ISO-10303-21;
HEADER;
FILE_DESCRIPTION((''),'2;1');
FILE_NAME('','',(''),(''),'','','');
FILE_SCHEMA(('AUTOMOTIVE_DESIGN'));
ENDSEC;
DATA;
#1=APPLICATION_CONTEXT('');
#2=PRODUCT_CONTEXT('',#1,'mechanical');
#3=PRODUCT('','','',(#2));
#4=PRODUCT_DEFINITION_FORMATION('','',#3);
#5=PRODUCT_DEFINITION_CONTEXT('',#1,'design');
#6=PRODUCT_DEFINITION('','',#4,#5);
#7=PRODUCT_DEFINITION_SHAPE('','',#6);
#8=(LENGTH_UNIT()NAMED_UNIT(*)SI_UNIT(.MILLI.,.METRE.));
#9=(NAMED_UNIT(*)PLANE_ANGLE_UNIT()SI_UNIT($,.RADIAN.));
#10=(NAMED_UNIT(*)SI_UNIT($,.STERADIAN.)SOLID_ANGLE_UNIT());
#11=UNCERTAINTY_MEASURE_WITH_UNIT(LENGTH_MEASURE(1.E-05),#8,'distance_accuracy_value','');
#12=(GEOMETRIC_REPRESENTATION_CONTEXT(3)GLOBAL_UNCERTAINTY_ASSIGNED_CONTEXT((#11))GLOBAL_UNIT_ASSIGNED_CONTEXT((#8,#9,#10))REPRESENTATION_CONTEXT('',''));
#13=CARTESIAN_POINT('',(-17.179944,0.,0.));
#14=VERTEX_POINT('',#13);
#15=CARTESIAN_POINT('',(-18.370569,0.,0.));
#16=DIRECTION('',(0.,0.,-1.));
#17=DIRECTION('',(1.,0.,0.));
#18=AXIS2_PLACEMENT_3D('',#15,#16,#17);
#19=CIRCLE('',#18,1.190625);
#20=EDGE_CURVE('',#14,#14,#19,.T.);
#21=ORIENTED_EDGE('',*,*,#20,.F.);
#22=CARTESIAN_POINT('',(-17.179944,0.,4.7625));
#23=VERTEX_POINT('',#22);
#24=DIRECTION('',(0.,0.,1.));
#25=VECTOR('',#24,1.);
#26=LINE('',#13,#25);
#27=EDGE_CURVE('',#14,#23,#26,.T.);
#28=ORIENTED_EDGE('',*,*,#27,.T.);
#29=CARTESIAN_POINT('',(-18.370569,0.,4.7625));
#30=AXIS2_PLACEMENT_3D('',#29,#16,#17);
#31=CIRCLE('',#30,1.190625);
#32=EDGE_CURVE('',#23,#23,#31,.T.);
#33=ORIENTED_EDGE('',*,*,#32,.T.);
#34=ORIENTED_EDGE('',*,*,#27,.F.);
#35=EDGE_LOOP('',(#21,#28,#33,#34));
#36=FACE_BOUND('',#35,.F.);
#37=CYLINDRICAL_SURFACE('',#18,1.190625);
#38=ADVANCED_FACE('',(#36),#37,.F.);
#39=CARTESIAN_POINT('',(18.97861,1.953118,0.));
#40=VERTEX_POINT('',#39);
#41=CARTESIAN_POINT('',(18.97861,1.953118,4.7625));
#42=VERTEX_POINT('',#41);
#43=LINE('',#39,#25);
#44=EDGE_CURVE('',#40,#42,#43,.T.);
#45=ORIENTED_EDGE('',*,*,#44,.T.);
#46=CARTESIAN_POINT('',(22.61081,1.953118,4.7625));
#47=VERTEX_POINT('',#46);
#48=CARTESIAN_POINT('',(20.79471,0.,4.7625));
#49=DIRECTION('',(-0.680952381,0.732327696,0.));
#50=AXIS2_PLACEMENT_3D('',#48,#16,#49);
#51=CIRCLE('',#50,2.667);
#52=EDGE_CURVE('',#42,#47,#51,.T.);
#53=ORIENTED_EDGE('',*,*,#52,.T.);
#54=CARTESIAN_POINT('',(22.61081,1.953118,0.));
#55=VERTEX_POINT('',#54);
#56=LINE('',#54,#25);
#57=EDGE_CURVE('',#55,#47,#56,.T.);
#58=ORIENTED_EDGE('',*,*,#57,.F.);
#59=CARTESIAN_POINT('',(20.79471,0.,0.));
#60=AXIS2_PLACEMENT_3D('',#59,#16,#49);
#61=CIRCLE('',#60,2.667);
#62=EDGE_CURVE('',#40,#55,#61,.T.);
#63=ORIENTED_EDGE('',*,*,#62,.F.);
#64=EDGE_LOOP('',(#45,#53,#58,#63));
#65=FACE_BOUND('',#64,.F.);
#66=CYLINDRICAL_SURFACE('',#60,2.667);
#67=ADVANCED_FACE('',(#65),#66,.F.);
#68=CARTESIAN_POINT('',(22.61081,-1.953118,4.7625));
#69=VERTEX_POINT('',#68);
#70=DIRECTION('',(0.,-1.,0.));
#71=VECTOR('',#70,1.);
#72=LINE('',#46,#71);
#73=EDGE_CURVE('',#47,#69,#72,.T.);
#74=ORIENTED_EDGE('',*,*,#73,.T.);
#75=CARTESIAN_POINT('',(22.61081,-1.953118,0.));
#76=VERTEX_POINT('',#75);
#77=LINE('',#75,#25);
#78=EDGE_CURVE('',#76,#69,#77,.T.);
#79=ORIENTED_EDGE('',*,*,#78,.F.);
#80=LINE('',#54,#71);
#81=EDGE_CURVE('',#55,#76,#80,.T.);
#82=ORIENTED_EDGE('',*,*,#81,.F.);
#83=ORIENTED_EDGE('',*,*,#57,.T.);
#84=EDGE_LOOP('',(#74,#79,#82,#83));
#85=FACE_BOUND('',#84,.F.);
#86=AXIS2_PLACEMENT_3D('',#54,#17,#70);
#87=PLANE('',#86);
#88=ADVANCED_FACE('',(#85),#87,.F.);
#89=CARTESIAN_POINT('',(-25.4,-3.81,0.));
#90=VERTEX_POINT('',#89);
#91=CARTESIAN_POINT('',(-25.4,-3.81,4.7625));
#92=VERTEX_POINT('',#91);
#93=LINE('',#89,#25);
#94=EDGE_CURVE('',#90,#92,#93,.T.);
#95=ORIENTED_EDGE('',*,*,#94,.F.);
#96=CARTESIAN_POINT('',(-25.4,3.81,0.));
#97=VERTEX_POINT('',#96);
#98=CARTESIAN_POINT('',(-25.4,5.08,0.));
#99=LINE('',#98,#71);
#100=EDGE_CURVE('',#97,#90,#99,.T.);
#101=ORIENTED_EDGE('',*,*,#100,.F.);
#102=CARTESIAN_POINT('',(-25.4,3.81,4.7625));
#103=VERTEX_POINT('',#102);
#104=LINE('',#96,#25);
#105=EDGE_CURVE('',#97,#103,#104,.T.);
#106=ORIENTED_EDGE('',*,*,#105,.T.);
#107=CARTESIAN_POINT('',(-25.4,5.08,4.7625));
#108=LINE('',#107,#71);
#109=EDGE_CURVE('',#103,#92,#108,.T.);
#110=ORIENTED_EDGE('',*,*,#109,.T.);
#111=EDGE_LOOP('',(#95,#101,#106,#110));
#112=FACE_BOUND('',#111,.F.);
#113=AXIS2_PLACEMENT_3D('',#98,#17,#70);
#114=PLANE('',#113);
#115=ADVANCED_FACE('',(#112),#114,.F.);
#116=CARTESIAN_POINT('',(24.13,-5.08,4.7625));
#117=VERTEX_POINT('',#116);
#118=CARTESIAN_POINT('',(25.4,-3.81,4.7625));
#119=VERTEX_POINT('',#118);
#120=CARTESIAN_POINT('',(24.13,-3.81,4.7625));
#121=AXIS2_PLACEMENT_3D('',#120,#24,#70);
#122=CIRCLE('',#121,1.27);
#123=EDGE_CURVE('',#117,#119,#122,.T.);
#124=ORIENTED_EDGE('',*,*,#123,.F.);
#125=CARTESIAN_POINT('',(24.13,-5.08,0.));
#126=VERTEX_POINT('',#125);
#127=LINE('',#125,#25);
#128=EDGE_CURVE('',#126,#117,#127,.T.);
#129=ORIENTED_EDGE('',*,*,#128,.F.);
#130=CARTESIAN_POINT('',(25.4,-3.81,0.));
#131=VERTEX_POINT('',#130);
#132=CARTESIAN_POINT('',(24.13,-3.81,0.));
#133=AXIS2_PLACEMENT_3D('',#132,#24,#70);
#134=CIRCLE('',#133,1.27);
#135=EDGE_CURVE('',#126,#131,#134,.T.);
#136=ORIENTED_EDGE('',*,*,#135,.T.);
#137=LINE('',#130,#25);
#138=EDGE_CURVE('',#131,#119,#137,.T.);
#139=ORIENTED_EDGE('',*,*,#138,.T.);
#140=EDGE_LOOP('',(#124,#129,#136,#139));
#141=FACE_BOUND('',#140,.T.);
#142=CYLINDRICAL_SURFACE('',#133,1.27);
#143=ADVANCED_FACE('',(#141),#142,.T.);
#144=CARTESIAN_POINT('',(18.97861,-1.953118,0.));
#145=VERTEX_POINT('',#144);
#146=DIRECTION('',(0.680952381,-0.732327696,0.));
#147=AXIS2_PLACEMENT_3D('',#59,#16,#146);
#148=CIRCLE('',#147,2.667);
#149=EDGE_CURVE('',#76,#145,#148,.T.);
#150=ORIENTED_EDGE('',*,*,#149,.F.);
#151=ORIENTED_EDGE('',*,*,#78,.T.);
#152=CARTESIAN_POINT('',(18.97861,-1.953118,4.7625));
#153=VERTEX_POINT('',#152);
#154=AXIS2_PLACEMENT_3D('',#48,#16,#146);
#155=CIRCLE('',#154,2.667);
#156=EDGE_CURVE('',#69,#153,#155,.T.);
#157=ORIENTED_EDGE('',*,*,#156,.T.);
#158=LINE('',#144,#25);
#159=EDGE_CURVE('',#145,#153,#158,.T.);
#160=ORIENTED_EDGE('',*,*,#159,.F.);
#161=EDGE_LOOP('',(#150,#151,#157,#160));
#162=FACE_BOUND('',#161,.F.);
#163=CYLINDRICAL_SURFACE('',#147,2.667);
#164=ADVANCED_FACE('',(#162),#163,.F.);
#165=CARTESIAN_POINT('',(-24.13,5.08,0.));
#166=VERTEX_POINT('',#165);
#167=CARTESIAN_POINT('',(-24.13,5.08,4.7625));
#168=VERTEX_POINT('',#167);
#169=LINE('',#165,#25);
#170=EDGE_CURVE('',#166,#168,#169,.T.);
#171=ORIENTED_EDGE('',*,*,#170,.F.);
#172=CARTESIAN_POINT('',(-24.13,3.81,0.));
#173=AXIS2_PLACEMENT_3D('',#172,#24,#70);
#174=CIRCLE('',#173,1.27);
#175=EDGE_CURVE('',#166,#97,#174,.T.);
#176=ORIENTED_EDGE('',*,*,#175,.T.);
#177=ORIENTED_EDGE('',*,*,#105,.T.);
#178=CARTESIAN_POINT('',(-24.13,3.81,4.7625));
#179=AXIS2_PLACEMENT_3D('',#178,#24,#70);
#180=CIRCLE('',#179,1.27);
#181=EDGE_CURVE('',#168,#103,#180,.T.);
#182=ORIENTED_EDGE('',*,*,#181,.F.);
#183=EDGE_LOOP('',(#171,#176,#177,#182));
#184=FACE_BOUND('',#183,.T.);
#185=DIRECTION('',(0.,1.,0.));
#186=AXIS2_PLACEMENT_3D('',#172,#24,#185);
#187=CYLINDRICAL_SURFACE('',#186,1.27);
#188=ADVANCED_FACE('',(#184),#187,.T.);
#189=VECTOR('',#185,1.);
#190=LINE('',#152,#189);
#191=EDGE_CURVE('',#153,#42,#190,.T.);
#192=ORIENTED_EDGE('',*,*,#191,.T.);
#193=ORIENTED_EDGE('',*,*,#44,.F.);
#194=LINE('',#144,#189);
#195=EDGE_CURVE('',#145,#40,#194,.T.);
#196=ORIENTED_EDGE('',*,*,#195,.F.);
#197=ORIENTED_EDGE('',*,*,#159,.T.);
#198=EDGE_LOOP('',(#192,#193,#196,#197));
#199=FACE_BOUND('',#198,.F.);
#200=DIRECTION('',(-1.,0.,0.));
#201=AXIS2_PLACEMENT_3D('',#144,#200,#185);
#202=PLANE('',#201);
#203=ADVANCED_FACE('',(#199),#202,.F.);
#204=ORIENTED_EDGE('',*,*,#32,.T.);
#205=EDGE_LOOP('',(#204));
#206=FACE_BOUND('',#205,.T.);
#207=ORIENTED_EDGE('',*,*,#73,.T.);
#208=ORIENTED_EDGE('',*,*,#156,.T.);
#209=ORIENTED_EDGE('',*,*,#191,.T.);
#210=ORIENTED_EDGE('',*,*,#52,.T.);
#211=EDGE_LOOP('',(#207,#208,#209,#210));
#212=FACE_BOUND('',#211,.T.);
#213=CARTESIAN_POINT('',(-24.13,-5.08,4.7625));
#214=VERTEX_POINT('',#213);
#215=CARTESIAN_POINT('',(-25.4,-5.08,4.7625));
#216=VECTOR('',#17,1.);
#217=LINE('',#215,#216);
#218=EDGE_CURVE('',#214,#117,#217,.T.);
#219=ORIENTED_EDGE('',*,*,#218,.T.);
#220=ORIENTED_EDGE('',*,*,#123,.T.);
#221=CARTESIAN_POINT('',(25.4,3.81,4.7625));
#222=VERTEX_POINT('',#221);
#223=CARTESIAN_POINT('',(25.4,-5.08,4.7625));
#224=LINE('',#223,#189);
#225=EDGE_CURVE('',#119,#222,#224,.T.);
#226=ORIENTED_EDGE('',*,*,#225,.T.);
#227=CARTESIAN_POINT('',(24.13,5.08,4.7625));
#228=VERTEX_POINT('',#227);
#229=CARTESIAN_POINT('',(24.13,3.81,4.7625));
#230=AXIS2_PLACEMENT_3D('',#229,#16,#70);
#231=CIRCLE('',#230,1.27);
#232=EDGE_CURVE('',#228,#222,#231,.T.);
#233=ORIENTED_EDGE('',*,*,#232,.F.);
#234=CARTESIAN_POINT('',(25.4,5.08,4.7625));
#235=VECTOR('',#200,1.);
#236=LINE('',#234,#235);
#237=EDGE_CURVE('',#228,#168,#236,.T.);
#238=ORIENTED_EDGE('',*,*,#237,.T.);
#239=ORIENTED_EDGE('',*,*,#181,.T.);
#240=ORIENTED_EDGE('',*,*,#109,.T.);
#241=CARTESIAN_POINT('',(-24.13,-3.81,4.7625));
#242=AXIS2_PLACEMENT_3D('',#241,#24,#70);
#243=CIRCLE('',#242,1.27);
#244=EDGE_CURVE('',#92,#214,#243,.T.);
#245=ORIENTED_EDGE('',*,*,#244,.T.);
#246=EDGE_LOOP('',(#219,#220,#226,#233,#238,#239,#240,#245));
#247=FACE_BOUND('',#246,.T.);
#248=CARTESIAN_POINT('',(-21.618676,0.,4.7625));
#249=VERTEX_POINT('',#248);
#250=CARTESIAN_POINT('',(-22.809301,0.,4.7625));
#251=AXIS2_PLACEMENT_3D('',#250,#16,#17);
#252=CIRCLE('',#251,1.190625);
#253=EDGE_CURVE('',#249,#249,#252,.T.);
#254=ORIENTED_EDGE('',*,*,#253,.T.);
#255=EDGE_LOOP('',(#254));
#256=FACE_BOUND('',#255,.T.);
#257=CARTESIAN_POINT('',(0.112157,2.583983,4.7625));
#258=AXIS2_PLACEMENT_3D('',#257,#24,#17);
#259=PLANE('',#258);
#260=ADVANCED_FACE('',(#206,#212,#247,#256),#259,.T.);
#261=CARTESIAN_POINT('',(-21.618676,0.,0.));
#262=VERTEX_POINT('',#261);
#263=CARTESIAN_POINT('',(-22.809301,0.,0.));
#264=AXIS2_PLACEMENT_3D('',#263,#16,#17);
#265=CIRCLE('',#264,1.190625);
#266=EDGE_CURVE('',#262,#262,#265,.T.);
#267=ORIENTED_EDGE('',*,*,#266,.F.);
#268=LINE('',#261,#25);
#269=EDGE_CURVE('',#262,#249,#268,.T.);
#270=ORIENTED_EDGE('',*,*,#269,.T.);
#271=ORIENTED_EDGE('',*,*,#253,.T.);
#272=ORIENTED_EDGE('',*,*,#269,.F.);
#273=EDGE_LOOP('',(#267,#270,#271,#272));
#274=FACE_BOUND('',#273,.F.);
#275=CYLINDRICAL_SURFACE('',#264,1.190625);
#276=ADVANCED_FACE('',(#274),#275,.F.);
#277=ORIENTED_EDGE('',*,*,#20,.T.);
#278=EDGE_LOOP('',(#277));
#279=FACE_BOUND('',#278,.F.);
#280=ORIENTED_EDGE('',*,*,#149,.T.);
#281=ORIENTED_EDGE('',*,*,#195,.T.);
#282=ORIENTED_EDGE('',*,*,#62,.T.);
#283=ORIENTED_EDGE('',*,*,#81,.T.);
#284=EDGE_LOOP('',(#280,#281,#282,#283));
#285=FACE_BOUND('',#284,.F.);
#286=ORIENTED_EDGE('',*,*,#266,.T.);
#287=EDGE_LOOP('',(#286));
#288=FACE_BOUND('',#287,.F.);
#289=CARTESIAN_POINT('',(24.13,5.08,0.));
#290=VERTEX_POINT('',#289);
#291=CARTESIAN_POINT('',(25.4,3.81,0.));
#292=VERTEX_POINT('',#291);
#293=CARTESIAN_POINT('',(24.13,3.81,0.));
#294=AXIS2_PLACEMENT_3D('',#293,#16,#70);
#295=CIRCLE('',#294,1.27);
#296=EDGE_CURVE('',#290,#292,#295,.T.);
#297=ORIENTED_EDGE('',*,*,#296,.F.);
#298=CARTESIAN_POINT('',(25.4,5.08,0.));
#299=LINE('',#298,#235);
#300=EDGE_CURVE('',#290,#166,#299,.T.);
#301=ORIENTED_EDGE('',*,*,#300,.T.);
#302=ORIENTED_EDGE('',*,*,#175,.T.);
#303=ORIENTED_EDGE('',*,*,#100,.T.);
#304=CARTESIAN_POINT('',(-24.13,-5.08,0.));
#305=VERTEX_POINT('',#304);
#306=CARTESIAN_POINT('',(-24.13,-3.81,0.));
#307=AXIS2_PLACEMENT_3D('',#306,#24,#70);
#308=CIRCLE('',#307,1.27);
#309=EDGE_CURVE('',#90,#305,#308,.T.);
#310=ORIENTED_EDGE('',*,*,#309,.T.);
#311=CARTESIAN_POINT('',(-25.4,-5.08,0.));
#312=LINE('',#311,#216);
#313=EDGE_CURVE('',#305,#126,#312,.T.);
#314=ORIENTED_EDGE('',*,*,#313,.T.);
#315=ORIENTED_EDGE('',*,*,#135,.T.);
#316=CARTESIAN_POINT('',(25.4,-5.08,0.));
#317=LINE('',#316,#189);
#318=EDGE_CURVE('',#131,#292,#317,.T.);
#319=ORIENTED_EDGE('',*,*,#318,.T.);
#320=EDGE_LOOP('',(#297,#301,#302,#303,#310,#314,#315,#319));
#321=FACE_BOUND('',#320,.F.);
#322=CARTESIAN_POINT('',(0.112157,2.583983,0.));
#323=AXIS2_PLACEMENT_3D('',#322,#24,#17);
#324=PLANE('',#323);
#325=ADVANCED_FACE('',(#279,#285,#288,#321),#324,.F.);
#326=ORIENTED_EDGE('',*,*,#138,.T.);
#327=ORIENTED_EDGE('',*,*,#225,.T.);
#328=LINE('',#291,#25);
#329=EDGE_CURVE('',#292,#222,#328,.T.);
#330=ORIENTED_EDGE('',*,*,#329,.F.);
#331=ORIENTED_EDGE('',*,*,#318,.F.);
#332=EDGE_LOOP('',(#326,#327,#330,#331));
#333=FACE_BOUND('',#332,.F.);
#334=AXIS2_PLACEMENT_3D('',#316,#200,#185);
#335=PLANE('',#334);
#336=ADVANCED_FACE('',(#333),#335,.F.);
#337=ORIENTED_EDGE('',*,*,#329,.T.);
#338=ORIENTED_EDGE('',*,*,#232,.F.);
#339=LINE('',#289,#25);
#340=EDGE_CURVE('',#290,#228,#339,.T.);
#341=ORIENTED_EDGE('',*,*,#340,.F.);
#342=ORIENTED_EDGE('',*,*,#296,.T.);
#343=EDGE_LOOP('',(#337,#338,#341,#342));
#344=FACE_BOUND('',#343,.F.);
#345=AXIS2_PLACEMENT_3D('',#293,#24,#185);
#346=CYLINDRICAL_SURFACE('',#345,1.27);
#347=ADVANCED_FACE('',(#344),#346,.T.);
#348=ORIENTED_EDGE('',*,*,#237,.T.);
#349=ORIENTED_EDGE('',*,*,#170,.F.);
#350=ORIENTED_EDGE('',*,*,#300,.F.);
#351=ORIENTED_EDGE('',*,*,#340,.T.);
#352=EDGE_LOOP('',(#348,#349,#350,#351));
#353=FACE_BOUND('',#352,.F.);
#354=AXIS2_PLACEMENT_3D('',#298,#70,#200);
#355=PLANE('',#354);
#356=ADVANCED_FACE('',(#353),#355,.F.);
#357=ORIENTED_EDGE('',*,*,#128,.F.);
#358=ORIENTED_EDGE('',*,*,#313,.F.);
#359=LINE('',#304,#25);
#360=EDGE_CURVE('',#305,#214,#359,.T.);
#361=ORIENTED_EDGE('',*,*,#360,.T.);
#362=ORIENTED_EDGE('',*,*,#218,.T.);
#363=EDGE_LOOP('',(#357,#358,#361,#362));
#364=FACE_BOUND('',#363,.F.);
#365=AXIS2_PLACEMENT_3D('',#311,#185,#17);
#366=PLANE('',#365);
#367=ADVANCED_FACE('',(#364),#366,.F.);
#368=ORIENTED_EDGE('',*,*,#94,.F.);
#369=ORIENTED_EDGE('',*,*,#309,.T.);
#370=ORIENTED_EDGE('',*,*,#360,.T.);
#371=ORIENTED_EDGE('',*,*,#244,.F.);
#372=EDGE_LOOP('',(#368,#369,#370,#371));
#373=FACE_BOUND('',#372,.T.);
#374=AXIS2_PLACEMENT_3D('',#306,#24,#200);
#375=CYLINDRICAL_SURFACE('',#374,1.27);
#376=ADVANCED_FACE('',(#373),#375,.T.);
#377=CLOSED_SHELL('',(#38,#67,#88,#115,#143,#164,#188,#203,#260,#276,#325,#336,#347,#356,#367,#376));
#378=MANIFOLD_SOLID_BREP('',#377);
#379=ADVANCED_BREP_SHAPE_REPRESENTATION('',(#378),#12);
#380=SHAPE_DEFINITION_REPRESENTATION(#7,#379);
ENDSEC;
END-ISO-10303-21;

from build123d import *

# Parameters (mm, degrees)
F1_DEPTH = 4.7625
F2_R     = 1.27


# Not quite as in the source:
# - a length typed as a fraction of an inch, garbled in the dataset ("3 / 203.2 mm" for 3/8 in), is restored


with BuildPart() as f1:
    # F0 (on Top) → F1 (new body)
    with BuildSketch(Plane.XY):
        with BuildLine():
            Line((25.4, 0), (25.4, 5.08))
            Line((25.4, 5.08), (-25.4, 5.08))
            Line((-25.4, 5.08), (-25.4, 0))
            Line((-25.4, 0), (-23.9999255717, 0))
            ThreePointArc((-23.9999255717, 0), (-22.8093005717, 1.190625), (-21.6186755717, 0))
            Line((-21.6186755717, 0), (-19.5611937523, 0))
            ThreePointArc((-19.5611937523, 0), (-18.3705687523, 1.190625), (-17.1799437523, 0))
            Line((-17.1799437523, 0), (18.1277101444, 0))
            ThreePointArc((18.1277101444, 0), (18.3496715251, 1.0652113171), (18.9786101444, 1.9531179662))
            ThreePointArc((18.9786101444, 1.9531179662), (20.7947101444, 2.667), (22.6108101444, 1.9531179662))
            ThreePointArc((22.6108101444, 1.9531179662), (23.2397487637, 1.0652113171), (23.4617101444, 0))
            Line((23.4617101444, 0), (25.4, 0))
        make_face()
        with BuildLine():
            Line((18.1277101444, 0), (18.9786101444, 0))
            Line((18.9786101444, 0), (18.9786101444, 1.9531179662))
            ThreePointArc((18.9786101444, 1.9531179662), (18.3496715251, 1.0652113171), (18.1277101444, 0))
        make_face()
        with BuildLine():
            Line((18.9786101444, -1.9531179662), (18.9786101444, 0))
            Line((18.9786101444, 0), (18.1277101444, 0))
            ThreePointArc((18.1277101444, 0), (18.3496715251, -1.0652113171), (18.9786101444, -1.9531179662))
        make_face()
        with BuildLine():
            Line((22.6108101444, 0), (23.4617101444, 0))
            ThreePointArc((23.4617101444, 0), (23.2397487637, 1.0652113171), (22.6108101444, 1.9531179662))
            Line((22.6108101444, 1.9531179662), (22.6108101444, 0))
        make_face()
        with BuildLine():
            ThreePointArc((22.6108101444, -1.9531179662), (23.2397487637, -1.0652113171), (23.4617101444, 0))
            Line((23.4617101444, 0), (22.6108101444, 0))
            Line((22.6108101444, 0), (22.6108101444, -1.9531179662))
        make_face()
        with BuildLine():
            Line((25.4, -5.08), (25.4, 0))
            Line((25.4, 0), (23.4617101444, 0))
            ThreePointArc((23.4617101444, 0), (23.2397487637, -1.0652113171), (22.6108101444, -1.9531179662))
            ThreePointArc((22.6108101444, -1.9531179662), (20.7947101444, -2.667), (18.9786101444, -1.9531179662))
            ThreePointArc((18.9786101444, -1.9531179662), (18.3496715251, -1.0652113171), (18.1277101444, 0))
            Line((18.1277101444, 0), (-17.1799437523, 0))
            ThreePointArc((-17.1799437523, 0), (-18.3705687523, -1.190625), (-19.5611937523, 0))
            Line((-19.5611937523, 0), (-21.6186755717, 0))
            ThreePointArc((-21.6186755717, 0), (-22.8093005717, -1.190625), (-23.9999255717, 0))
            Line((-23.9999255717, 0), (-25.4, 0))
            Line((-25.4, 0), (-25.4, -5.08))
            Line((-25.4, -5.08), (25.4, -5.08))
        make_face()
    extrude(amount=F1_DEPTH)

    # F2
    f2_edges = [f1.edges().sort_by_distance(p)[0] for p in [
        (25.4, 5.08, 2.38125),
        (25.4, -5.08, 2.38125),
        (-25.4, 5.08, 2.38125),
        (-25.4, -5.08, 2.38125),
    ]]
    fillet(f2_edges, radius=F2_R)


solid = f1.part
